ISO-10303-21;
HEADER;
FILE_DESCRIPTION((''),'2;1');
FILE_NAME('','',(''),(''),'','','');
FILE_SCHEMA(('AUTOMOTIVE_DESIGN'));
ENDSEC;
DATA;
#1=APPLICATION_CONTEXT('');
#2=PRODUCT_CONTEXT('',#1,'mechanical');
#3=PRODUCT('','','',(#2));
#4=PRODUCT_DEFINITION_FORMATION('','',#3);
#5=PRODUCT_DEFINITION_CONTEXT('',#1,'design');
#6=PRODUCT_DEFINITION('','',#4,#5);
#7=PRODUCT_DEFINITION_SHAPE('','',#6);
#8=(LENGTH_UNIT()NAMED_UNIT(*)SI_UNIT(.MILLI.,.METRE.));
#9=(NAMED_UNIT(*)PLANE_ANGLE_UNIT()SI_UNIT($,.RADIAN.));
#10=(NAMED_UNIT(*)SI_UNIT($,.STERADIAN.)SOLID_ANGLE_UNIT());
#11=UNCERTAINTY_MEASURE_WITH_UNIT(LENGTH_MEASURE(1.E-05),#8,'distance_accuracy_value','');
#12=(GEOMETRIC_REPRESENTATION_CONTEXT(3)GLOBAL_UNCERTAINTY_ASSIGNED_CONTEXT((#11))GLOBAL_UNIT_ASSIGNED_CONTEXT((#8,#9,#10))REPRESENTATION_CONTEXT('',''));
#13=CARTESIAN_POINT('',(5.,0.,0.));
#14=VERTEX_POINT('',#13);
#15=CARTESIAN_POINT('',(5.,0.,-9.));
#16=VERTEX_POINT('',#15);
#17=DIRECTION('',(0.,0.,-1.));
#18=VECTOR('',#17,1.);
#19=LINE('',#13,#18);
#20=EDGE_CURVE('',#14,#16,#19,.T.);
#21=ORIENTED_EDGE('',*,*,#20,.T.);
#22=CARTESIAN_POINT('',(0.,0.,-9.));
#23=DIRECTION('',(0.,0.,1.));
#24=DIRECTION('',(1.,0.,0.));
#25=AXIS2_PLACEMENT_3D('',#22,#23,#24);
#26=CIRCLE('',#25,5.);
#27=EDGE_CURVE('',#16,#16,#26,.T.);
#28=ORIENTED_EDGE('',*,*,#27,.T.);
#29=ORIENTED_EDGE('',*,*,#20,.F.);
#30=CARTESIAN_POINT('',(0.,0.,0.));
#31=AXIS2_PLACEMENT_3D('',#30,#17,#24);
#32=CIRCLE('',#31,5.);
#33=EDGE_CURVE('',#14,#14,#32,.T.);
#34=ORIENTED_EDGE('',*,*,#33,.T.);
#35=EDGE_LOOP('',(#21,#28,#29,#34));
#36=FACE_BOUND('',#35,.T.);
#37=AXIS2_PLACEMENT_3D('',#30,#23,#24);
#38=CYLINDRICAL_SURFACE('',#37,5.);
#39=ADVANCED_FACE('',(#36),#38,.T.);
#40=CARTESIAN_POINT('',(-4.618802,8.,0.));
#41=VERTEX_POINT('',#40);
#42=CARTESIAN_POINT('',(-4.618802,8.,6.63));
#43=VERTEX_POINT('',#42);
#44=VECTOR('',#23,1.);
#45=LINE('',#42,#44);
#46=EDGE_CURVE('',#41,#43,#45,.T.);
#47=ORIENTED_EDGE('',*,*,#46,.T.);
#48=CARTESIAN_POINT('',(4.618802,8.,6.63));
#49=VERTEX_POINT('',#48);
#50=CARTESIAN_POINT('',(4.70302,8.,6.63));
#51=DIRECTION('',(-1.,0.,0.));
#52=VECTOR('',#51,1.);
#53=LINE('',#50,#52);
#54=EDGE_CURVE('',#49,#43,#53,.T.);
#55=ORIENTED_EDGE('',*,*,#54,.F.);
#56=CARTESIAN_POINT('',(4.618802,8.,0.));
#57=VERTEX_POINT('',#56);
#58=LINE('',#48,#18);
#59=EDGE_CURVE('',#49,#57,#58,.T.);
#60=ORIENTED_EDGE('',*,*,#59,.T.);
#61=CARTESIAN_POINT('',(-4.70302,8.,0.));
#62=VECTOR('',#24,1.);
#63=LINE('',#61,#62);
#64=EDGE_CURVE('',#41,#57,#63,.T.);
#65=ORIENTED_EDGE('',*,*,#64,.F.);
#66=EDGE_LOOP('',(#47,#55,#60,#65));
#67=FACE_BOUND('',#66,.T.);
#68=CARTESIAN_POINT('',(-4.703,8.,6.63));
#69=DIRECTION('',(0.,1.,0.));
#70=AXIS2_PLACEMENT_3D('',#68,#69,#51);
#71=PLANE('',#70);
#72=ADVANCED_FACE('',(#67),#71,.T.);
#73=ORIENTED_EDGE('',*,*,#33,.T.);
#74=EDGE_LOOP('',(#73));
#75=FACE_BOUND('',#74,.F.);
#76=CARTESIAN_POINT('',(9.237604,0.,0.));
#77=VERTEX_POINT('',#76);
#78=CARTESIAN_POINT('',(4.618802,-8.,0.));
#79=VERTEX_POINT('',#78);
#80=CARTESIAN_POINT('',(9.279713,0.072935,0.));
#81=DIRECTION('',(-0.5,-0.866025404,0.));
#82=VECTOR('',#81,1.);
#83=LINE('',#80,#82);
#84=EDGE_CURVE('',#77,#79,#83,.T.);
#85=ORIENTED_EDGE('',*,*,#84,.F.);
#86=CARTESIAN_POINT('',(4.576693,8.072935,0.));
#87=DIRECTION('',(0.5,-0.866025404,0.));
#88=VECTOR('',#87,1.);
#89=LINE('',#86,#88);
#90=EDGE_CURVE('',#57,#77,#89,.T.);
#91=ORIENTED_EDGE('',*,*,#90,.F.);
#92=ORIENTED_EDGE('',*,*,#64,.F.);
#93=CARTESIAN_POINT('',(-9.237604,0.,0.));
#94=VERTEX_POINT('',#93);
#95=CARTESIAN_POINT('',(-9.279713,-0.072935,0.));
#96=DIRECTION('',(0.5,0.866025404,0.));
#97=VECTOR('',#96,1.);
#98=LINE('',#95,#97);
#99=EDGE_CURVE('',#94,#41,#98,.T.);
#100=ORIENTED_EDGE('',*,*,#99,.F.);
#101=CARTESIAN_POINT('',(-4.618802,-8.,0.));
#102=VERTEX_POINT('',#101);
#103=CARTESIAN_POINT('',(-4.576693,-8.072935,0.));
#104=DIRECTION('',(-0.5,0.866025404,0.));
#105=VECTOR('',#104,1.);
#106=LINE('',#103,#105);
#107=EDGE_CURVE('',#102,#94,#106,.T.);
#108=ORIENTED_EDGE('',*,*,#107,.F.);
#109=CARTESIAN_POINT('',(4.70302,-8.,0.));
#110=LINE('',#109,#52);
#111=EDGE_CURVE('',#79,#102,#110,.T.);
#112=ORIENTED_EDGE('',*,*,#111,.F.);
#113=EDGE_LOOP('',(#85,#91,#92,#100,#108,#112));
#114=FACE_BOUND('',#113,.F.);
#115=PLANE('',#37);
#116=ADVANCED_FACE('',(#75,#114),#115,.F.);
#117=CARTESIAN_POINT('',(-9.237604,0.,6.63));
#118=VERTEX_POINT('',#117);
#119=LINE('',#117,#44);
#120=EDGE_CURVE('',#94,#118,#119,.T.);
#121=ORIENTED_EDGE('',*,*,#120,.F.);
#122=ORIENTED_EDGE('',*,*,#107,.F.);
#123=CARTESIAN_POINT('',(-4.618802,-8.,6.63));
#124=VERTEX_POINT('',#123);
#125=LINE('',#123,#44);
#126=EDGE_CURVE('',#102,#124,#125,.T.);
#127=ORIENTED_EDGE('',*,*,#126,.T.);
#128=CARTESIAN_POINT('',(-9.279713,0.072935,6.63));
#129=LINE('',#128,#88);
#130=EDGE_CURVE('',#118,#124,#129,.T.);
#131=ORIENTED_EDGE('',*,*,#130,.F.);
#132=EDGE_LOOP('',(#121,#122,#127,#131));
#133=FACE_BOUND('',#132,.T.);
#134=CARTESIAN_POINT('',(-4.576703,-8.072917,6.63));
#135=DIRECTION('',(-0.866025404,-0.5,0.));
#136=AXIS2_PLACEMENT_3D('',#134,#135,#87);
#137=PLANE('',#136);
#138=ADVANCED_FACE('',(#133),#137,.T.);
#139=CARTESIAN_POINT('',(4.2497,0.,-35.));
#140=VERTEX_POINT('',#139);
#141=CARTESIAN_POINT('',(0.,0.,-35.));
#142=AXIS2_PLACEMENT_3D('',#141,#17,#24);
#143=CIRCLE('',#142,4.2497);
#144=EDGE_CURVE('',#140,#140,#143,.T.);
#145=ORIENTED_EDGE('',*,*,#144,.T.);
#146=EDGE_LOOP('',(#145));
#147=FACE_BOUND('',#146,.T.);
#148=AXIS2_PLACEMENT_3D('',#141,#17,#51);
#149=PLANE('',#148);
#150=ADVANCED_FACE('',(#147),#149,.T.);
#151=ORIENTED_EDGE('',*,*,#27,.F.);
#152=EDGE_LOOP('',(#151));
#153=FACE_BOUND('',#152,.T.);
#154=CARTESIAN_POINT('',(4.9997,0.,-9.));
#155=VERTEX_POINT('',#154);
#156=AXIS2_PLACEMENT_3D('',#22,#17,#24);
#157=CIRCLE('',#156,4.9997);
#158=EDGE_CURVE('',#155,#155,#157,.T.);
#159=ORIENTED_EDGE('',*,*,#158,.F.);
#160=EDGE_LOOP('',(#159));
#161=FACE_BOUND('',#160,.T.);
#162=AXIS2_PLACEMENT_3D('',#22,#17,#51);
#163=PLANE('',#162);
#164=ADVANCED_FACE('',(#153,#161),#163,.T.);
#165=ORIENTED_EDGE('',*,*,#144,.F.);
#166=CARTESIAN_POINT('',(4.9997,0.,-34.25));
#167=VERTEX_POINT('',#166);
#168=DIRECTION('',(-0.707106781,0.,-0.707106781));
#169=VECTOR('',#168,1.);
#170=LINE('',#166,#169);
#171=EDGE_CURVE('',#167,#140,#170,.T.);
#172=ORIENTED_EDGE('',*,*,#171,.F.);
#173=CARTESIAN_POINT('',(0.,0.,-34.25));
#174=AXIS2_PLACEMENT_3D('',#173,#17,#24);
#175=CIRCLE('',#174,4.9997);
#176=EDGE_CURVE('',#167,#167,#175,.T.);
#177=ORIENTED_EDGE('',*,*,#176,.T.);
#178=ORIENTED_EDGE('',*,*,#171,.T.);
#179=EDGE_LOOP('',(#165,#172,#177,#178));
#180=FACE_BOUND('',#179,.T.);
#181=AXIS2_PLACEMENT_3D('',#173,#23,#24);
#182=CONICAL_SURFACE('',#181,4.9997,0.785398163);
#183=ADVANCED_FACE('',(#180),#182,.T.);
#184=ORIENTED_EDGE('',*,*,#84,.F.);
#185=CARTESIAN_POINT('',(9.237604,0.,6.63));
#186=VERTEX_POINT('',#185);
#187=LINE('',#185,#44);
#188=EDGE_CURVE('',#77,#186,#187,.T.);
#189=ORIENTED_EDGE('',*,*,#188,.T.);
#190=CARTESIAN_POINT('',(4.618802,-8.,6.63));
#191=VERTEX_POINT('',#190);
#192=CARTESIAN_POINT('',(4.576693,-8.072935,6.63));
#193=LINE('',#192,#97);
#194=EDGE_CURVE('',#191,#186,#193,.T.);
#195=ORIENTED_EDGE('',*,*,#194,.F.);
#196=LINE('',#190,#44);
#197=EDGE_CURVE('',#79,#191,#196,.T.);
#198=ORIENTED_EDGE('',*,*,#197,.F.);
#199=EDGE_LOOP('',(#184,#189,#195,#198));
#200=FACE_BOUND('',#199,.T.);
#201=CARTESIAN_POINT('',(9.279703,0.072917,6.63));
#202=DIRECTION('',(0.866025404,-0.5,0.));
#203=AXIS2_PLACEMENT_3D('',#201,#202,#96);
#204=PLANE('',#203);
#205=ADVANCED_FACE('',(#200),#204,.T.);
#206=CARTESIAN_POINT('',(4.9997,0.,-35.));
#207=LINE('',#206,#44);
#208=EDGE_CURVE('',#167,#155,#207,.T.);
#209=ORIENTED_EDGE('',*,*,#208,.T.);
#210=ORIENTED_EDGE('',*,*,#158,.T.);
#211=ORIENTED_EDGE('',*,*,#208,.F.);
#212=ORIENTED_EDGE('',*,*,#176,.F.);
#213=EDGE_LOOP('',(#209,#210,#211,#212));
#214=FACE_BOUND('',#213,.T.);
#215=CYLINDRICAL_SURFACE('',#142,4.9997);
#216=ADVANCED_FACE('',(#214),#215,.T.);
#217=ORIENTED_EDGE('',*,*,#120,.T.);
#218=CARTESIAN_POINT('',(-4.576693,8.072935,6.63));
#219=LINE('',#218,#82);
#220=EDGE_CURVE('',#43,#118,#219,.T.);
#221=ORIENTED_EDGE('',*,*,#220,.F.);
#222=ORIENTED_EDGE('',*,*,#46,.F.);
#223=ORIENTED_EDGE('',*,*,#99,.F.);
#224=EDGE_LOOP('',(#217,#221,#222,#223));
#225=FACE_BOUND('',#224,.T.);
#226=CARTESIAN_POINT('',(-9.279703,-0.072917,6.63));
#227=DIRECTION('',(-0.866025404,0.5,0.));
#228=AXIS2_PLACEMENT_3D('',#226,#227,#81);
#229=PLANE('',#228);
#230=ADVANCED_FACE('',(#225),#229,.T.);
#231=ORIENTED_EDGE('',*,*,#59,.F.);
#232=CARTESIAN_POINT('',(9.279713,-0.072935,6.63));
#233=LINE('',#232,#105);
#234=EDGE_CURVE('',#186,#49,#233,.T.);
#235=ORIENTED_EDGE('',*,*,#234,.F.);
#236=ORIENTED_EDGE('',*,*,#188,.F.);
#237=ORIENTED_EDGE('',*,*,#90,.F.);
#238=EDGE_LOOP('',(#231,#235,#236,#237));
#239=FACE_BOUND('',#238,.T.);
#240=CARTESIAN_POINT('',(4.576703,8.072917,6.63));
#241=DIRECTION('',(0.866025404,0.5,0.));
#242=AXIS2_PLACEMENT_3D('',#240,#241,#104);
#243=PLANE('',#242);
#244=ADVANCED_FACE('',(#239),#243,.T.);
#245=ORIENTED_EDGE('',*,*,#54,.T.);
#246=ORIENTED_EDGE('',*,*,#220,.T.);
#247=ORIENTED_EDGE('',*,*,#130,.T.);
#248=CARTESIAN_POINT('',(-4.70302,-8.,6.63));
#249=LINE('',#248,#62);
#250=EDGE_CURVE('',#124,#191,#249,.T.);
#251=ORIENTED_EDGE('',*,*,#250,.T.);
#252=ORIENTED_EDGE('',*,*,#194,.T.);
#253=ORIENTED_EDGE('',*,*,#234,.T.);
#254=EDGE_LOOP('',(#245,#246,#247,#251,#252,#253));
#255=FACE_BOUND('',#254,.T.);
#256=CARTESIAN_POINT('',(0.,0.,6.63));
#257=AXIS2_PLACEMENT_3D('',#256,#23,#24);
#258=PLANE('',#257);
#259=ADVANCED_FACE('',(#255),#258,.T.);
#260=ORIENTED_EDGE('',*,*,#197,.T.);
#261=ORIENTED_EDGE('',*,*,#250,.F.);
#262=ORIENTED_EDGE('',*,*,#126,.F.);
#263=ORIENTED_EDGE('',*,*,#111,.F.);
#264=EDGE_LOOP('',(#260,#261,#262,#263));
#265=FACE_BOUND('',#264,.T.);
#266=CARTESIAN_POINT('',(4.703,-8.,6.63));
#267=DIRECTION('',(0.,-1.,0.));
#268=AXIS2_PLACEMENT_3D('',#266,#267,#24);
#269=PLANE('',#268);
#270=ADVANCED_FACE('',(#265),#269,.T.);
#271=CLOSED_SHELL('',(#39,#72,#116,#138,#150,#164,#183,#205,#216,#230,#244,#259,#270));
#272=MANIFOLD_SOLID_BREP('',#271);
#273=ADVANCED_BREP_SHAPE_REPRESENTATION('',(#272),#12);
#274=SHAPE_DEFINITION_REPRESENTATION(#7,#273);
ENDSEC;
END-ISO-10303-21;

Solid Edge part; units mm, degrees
sketch "Sketch1" plane through (0, 0, 0) normal (0, 0, 1) x (1, 0, 0)
  circle A0 centre (0, 0) radius 9.28
  dimension "D1" = 18.56
extrude "Protrusion1" add sketch "Sketch1" along normal blind 6.63
sketch "Sketch2" plane through (0, 0, 0) normal (0, 0, -1) x (1, 0, 0)
  circle A0 centre (0, 0) radius 5
extrude "Protrusion2" add sketch "Sketch2" along normal blind 35
sketch "Sketch3" plane through (0, 0, -35) normal (0, 0, -1) x (1, 0, 0)
  circle A0 centre (0, 0) radius 4.9997
extrude "Cutout1" cut sketch "Sketch3" against normal blind 26 flip side to cut
chamfer "Chamfer_1" distance 0.75 angle 45 1 edges at (-4.9997, 0, -35)
sketch "Sketch4" plane through (0, 0, 6.63) normal (0, 0, 1) x (1, 0, 0)
  line L0 (-4.703, 8) -> (4.703, 8)
  dimension "D1" = 16
extrude "Cutout2" cut sketch "Sketch4" against normal up to next material side at (0, 8.05, 6.63)
pattern_circular "Pattern1" count 6 over 360 about axis through (0, 0, 6.63) along (0, 0, 1) of "Cutout2"
properties part number "24104508"
